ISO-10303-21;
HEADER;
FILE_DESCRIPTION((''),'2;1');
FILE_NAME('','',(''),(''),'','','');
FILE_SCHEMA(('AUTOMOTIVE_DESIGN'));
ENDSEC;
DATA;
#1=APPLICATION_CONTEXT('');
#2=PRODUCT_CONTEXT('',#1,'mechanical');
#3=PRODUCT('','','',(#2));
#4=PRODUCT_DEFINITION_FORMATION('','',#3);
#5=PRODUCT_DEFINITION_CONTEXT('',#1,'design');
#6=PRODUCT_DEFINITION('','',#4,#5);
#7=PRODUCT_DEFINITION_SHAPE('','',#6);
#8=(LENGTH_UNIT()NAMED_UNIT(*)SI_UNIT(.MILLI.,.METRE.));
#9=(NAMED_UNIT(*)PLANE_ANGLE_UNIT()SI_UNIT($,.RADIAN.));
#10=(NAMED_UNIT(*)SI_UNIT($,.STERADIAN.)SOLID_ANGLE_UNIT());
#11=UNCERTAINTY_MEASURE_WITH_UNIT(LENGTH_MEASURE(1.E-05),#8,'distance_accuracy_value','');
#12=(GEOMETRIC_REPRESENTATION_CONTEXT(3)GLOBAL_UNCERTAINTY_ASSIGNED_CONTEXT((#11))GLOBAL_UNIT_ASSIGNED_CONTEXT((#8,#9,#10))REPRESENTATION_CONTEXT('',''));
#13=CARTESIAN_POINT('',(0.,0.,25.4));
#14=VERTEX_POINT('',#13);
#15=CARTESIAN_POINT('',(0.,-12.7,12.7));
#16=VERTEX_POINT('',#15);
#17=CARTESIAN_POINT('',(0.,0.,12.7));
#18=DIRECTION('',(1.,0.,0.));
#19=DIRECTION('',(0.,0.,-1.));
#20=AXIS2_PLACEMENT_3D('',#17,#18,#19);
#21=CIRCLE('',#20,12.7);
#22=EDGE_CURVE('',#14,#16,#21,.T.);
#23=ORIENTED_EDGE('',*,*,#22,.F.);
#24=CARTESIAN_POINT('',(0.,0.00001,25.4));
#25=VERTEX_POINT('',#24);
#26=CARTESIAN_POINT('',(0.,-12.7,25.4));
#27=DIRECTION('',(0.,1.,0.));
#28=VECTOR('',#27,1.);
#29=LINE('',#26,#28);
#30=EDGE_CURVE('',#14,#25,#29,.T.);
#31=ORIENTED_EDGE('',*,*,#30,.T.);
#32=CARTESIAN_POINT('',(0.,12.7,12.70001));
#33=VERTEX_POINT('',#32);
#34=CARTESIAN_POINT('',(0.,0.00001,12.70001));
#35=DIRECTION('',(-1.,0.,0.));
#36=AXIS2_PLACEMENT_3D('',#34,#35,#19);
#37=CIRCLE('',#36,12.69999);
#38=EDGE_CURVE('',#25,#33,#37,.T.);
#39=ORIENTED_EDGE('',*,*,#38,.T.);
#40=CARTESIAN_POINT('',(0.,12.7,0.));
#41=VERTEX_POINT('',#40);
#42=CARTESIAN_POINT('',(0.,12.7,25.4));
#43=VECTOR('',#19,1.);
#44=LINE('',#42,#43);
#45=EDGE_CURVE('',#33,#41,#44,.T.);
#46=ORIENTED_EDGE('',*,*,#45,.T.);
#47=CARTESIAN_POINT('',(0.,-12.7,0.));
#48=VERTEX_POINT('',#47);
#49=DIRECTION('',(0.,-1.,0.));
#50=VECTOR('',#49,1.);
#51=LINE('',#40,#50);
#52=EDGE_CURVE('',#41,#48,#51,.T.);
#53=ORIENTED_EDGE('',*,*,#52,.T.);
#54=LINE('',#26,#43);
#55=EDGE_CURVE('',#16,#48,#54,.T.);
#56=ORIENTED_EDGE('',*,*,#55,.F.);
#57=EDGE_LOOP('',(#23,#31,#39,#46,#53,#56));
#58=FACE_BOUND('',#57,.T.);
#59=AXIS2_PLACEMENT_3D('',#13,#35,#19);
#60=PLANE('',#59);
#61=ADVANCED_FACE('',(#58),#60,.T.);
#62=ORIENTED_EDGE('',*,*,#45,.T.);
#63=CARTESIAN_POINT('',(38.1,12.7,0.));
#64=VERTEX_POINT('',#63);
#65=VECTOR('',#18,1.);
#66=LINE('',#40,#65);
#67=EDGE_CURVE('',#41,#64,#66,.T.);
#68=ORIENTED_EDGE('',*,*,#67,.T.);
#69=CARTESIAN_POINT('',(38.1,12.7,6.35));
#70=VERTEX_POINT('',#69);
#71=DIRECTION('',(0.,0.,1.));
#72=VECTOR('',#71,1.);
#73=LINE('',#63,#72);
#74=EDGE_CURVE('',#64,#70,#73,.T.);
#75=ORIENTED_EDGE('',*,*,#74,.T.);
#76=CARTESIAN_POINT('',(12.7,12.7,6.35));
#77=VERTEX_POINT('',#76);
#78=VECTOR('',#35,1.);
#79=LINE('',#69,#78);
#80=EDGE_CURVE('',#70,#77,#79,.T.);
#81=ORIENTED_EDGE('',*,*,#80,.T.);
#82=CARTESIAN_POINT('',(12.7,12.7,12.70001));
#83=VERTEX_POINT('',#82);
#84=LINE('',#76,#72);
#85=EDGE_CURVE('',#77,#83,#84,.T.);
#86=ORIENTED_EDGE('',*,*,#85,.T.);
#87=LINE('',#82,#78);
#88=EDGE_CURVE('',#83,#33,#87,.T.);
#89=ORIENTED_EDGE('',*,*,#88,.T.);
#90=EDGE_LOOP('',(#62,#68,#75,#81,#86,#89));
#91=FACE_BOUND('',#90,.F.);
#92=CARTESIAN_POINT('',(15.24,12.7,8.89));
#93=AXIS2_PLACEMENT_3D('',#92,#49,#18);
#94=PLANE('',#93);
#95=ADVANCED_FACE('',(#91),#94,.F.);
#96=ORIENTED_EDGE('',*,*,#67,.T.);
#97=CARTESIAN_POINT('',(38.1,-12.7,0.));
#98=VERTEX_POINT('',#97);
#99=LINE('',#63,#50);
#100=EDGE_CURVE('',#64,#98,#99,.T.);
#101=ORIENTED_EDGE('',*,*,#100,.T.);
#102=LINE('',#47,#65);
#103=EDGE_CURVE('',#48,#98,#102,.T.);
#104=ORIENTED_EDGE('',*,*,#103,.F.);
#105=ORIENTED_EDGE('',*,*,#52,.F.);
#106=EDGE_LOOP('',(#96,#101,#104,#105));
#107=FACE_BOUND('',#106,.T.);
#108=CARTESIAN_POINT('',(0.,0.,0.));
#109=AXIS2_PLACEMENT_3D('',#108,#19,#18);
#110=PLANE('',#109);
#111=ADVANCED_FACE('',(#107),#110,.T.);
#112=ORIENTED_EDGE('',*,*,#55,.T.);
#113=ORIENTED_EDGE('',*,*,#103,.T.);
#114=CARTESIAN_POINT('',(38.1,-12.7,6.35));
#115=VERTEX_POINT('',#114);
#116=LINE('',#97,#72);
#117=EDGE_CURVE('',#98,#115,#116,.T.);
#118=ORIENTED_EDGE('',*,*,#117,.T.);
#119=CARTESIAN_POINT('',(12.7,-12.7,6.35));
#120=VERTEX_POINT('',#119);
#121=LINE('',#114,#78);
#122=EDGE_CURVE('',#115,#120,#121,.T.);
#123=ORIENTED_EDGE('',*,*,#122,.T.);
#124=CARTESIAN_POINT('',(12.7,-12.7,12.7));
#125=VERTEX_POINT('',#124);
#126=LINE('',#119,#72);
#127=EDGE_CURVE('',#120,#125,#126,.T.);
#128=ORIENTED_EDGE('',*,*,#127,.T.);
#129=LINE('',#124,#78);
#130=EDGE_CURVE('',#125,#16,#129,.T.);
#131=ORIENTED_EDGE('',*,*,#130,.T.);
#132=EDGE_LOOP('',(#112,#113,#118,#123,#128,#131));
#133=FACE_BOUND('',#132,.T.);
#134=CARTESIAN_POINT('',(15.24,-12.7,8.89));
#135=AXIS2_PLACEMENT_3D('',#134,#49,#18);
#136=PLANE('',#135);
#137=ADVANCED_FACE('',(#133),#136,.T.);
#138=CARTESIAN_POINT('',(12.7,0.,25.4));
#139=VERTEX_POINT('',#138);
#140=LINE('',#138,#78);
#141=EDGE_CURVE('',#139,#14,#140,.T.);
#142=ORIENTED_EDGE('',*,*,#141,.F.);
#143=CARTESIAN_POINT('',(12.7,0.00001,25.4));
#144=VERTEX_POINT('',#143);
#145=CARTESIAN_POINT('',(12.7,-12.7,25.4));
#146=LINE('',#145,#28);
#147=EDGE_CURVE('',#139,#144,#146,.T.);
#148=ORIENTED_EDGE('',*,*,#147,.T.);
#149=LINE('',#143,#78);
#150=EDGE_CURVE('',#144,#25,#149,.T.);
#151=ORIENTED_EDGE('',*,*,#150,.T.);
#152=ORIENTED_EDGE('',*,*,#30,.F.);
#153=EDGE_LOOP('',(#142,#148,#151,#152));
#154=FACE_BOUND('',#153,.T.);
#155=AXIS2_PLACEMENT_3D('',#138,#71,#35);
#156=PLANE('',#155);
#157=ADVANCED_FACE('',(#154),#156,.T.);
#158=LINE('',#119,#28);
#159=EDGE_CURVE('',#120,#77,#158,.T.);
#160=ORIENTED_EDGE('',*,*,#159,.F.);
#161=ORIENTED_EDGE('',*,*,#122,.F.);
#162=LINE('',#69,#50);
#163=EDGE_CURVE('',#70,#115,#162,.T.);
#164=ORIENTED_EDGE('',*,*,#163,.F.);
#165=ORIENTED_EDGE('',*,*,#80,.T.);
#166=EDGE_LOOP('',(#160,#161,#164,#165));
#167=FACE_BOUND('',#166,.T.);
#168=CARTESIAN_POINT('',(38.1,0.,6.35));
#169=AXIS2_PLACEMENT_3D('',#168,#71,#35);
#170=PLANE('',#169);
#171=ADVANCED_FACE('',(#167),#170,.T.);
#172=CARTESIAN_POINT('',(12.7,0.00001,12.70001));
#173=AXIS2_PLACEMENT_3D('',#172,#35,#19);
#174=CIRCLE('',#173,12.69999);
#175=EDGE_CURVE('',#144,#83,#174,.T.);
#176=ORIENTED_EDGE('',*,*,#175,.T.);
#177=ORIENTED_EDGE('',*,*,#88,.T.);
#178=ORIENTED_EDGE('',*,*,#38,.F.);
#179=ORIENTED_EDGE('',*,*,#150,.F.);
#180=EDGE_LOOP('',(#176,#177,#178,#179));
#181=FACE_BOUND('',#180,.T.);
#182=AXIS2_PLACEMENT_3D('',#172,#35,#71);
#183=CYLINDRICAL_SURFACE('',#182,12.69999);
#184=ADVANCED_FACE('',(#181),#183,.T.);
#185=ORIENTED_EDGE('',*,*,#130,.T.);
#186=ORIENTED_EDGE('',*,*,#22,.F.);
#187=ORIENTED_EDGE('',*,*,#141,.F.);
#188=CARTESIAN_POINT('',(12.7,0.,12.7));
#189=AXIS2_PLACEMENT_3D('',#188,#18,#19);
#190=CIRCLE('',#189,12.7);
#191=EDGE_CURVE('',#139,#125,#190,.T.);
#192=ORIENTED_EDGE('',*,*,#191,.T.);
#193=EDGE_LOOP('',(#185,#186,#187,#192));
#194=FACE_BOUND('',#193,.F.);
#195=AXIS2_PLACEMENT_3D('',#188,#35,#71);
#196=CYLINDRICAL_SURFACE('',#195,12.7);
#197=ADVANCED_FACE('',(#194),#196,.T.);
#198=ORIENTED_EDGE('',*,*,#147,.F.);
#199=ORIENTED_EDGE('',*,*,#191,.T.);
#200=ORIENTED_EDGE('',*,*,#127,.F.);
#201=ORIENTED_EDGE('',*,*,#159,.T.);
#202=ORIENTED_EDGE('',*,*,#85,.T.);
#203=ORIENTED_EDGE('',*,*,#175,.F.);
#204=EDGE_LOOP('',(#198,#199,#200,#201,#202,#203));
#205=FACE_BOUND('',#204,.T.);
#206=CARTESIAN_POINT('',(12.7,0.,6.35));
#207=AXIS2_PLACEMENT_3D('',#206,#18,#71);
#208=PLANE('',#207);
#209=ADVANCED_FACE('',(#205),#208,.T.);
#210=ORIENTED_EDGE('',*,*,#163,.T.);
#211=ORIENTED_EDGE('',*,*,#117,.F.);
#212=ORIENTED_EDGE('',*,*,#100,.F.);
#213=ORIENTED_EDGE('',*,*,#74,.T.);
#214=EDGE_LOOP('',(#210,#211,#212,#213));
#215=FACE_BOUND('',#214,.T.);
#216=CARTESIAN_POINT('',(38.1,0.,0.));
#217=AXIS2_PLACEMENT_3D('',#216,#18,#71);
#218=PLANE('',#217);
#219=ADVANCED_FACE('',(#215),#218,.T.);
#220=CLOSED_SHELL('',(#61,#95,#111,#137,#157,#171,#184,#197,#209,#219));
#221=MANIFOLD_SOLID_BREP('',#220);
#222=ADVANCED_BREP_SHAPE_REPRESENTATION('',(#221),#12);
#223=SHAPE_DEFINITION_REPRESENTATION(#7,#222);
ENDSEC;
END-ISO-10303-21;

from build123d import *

# Parameters (mm, degrees)
F1_DEPTH = 12.7
F2_R     = 12.7
F3_R     = 12.69999


# Not quite as in the source:
# - a fillet or chamfer is up to 0.001 mm smaller than in the source, because OpenCascade refuses the exact size


with BuildPart() as f1:
    # F0 (on Front) → F1 (new body, symmetric)
    with BuildSketch(Plane.XZ):
        Polygon((0, 25.4), (0, 0), (38.1, 0), (38.1, 6.35), (12.7, 6.35), (12.7, 25.4), align=None)
    extrude(amount=F1_DEPTH, both=True)

    # F2
    f2_edges = [f1.edges().sort_by_distance(p)[0] for p in [
        (6.35, -12.7, 25.4),
    ]]
    fillet(f2_edges, radius=F2_R)

    # F3 (radius 12.7 in the source; OpenCascade refuses exactly that, so slightly less here)
    f3_edges = [f1.edges().sort_by_distance(p)[0] for p in [
        (6.35, 12.7, 25.4),
    ]]
    fillet(f3_edges, radius=F3_R)


solid = f1.part
